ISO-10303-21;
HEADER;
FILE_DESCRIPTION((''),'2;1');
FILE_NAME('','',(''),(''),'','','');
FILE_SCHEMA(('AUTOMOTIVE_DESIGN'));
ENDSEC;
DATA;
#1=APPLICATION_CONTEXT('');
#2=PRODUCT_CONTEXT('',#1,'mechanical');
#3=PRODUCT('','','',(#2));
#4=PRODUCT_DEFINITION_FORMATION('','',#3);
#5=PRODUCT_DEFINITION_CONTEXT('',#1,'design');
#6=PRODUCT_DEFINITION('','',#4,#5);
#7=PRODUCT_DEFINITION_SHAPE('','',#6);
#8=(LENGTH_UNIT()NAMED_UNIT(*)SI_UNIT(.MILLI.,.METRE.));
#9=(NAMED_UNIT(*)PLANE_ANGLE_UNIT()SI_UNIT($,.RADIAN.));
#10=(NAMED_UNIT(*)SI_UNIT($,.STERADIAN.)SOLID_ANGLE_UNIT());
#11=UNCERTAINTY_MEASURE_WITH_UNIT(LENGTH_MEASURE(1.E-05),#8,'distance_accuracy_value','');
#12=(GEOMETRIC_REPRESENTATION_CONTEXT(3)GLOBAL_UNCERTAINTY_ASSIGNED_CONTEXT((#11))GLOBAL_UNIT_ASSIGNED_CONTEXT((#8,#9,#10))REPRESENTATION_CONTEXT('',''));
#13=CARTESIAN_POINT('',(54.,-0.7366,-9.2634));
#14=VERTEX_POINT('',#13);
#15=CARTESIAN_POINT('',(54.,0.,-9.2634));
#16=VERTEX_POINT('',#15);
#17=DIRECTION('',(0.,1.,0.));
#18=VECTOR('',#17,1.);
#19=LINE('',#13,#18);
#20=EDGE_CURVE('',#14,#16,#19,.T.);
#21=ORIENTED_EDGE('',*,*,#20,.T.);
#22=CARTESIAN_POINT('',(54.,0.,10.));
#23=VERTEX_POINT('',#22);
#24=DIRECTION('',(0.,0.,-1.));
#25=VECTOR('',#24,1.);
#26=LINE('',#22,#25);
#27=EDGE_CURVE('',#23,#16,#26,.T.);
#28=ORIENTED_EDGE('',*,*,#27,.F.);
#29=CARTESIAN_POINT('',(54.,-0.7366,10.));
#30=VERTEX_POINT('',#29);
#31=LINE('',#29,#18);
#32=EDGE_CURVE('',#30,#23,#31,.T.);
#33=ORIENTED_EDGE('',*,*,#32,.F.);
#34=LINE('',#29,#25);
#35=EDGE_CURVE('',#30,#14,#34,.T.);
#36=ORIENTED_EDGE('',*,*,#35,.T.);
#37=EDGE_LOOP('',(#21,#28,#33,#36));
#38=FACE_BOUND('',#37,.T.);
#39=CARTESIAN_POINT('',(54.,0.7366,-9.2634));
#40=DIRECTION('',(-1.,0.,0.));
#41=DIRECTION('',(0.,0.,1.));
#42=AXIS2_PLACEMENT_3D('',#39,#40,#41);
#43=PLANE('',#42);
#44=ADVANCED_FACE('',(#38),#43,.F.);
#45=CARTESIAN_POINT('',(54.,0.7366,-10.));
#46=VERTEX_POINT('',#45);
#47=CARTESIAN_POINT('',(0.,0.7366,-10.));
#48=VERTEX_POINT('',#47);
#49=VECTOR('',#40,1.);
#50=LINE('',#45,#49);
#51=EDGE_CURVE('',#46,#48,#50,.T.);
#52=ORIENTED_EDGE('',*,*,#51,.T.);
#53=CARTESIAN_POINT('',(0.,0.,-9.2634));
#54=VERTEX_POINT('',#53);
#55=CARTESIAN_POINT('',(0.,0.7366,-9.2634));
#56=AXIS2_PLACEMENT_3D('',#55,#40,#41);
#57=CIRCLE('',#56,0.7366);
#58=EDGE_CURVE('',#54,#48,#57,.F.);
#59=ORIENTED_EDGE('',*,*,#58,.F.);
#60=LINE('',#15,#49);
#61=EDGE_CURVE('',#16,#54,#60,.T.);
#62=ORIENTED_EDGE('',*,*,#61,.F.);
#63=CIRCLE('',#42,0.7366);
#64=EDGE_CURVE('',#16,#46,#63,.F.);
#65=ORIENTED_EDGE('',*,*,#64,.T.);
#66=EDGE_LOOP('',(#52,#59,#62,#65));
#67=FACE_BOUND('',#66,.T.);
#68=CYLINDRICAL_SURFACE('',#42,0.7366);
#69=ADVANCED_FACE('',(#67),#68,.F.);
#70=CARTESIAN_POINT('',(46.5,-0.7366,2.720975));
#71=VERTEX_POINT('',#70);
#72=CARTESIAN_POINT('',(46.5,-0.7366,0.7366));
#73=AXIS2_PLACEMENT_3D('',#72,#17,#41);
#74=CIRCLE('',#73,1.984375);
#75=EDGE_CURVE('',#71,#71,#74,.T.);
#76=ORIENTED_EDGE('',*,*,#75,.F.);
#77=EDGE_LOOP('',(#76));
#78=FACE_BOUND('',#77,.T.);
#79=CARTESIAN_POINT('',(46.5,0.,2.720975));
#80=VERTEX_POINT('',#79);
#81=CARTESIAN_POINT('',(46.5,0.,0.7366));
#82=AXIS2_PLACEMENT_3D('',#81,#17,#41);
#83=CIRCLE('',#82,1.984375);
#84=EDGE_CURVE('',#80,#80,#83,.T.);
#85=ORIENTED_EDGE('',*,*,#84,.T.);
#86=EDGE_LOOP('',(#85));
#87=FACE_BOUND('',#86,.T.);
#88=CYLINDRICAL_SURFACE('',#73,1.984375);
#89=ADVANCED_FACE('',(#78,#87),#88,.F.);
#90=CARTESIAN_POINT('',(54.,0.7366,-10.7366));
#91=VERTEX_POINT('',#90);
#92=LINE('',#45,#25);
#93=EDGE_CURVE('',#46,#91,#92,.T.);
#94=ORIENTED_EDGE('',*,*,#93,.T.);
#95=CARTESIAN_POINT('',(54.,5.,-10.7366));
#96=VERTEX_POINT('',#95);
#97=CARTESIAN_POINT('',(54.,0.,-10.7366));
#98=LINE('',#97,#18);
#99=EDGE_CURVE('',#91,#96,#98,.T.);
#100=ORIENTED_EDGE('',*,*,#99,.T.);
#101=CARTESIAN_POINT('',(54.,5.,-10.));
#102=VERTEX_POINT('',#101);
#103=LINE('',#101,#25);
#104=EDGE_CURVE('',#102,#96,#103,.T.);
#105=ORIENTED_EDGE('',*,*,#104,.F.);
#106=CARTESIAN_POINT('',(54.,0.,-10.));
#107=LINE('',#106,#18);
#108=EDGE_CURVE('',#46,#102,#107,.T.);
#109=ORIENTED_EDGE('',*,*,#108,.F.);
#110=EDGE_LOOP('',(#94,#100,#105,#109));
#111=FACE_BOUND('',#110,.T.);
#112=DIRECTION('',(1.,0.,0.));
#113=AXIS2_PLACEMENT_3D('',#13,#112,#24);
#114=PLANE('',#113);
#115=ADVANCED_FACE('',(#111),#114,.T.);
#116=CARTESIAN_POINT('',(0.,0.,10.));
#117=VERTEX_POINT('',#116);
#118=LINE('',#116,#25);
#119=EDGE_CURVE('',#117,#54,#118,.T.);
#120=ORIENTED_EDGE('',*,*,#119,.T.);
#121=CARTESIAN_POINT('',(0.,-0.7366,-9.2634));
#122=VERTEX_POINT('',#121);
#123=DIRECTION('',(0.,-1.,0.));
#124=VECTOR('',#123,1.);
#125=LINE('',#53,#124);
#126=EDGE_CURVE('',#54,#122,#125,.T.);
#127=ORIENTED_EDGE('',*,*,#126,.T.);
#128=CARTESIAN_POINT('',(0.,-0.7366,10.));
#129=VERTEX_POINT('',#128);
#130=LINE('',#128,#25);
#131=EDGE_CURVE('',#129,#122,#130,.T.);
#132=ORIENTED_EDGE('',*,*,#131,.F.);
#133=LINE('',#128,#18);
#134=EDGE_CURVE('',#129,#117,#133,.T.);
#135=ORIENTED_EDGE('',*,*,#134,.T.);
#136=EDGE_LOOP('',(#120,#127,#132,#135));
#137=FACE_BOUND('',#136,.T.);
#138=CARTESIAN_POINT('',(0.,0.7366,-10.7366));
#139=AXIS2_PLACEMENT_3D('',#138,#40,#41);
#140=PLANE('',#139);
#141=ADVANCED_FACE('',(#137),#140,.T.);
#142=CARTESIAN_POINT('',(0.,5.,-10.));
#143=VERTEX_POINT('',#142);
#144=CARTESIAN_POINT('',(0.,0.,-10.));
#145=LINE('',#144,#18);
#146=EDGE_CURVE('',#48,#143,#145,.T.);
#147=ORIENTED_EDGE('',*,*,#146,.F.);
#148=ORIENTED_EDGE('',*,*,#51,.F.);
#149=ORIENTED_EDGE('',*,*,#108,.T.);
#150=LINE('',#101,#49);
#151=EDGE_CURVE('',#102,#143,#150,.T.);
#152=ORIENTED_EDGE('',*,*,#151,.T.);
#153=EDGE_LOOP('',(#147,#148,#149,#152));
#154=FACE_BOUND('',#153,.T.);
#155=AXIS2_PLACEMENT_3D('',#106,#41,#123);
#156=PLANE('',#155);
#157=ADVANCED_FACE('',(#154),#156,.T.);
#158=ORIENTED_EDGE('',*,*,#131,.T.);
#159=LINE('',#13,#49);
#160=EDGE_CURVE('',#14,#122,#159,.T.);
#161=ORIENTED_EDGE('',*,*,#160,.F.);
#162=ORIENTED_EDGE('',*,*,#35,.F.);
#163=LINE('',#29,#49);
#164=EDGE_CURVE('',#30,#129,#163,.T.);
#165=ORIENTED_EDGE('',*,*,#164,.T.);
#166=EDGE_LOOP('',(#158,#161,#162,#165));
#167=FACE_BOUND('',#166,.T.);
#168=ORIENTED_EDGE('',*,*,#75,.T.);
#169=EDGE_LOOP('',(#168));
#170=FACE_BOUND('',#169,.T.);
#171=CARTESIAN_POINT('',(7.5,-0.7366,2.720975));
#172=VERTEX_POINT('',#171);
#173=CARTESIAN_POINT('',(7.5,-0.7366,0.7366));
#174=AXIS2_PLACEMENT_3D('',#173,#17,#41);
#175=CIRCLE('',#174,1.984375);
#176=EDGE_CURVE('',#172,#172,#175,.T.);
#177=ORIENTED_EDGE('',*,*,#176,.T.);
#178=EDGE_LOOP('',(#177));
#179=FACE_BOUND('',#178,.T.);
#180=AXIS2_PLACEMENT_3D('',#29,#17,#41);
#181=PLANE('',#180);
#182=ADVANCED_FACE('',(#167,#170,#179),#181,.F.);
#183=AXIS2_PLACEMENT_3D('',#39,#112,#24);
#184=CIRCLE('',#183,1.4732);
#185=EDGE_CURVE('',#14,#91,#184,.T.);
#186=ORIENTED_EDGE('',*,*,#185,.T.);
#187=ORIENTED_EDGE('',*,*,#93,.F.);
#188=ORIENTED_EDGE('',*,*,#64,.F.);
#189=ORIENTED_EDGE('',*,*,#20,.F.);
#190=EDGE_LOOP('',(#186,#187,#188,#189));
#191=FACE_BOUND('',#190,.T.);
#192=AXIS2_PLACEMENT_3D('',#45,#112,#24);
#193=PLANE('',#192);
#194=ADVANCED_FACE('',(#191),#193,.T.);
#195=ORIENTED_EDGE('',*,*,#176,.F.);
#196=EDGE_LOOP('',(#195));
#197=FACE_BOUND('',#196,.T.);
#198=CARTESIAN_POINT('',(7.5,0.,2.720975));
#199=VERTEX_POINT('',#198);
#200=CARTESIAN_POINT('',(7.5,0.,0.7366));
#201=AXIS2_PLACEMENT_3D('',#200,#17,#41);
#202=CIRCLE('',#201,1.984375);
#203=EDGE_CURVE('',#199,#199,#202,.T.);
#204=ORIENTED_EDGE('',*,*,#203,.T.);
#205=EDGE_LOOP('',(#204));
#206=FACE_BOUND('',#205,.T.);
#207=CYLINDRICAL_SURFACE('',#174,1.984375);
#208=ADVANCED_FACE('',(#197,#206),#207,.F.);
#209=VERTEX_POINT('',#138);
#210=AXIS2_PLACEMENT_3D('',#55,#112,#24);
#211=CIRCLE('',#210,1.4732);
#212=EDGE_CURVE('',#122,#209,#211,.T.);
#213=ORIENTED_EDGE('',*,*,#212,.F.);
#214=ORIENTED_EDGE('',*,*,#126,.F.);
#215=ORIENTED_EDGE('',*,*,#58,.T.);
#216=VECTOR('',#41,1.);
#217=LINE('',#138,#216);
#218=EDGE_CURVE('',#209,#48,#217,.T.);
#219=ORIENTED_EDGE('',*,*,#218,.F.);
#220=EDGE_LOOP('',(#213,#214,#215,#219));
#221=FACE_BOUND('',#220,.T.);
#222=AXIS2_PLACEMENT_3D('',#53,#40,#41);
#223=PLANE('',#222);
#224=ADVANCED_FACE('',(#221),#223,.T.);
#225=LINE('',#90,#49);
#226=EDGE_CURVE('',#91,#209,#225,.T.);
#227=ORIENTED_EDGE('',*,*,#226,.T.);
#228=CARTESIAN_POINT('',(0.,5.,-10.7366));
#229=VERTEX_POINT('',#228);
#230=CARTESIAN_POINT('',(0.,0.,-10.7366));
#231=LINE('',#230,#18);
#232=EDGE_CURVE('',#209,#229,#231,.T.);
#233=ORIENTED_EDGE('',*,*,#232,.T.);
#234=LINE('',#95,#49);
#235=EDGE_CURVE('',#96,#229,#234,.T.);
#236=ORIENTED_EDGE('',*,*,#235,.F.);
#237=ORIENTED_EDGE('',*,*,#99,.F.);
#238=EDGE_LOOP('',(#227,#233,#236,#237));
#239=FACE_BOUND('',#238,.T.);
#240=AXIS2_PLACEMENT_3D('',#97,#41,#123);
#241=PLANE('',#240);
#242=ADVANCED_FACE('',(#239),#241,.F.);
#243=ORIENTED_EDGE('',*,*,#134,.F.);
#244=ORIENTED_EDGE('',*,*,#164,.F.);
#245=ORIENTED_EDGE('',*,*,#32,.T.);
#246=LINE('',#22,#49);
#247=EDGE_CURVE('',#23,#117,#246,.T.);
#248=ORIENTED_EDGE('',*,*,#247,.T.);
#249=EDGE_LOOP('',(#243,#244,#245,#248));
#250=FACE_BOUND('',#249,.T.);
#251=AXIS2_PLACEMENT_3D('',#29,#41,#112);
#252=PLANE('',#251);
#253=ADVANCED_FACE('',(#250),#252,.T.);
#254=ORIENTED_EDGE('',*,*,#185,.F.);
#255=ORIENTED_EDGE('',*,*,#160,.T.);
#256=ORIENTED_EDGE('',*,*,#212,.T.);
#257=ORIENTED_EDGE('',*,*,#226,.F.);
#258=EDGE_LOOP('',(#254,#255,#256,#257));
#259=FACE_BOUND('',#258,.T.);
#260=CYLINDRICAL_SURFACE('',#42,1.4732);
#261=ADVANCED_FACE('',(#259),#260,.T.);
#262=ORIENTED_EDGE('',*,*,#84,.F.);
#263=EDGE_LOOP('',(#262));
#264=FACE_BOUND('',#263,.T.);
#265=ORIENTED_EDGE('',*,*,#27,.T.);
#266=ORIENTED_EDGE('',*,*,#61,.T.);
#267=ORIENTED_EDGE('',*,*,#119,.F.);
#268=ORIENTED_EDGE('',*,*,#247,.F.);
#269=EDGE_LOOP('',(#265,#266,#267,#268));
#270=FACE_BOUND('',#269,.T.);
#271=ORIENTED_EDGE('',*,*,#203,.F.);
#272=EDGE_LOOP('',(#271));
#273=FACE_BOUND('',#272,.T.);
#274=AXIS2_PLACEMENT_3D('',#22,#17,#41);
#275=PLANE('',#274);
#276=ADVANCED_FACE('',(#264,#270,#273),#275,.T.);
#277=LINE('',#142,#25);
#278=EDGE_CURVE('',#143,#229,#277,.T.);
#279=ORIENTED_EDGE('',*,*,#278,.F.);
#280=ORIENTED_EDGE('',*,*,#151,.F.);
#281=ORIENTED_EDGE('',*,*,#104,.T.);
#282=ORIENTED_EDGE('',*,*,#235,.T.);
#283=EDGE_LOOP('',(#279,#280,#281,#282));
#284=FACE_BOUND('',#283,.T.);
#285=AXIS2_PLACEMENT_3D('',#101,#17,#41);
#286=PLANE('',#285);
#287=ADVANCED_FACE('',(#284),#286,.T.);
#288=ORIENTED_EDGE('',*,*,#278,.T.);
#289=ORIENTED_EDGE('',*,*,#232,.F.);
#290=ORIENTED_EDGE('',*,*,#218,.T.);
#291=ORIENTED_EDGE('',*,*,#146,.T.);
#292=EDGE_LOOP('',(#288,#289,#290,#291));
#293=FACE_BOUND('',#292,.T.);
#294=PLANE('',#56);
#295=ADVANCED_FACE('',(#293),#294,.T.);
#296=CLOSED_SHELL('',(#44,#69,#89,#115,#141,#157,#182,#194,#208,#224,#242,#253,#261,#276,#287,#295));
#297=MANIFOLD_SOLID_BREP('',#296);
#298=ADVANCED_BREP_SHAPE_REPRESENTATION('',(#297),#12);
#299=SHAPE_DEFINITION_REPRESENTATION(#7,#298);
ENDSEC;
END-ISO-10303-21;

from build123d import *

# Parameters (mm, degrees)
BASE_FLANGE1_DEPTH = 54
SKETCH6_R          = 1.984375
CUT_EXTRUDE1_DEPTH = 56.283583274


# Sheet-metal steps are written as plain solids
with BuildPart() as part:
    # Sketch1 → Base-Flange1 (new body)
    with BuildSketch(Plane(origin=(0, 0, 0), x_dir=(0, 0, -1), z_dir=(1, 0, 0))):
        with BuildLine():
            Line((-10, 0), (9.2634, 0))
            ThreePointArc((9.2634, 0), (9.784254855, 0.215745145), (10, 0.7366))
            Line((10, 0.7366), (10, 5))
            Line((10, 5), (10.7366, 5))
            Line((10.7366, 5), (10.7366, 0.7366))
            ThreePointArc((10.7366, 0.7366), (10.30510971, -0.30510971), (9.2634, -0.7366))
            Line((9.2634, -0.7366), (-10, -0.7366))
            Line((-10, -0.7366), (-10, 0))
        make_face()
    extrude(amount=BASE_FLANGE1_DEPTH)

    # Sketch6 → Cut-Extrude1 (cut, through all)
    with BuildSketch(Plane(origin=(0, 0, 0), x_dir=(1, 0, 0), z_dir=(0, 1, 0))):
        with Locations(Location((7.5, -0.7366, 0), (0, 0, 270))):
            Circle(SKETCH6_R)
        with Locations(Location((46.5, -0.7366, 0), (0, 0, 270))):
            Circle(SKETCH6_R)
    extrude(amount=-CUT_EXTRUDE1_DEPTH, mode=Mode.SUBTRACT)


solid = part.part
